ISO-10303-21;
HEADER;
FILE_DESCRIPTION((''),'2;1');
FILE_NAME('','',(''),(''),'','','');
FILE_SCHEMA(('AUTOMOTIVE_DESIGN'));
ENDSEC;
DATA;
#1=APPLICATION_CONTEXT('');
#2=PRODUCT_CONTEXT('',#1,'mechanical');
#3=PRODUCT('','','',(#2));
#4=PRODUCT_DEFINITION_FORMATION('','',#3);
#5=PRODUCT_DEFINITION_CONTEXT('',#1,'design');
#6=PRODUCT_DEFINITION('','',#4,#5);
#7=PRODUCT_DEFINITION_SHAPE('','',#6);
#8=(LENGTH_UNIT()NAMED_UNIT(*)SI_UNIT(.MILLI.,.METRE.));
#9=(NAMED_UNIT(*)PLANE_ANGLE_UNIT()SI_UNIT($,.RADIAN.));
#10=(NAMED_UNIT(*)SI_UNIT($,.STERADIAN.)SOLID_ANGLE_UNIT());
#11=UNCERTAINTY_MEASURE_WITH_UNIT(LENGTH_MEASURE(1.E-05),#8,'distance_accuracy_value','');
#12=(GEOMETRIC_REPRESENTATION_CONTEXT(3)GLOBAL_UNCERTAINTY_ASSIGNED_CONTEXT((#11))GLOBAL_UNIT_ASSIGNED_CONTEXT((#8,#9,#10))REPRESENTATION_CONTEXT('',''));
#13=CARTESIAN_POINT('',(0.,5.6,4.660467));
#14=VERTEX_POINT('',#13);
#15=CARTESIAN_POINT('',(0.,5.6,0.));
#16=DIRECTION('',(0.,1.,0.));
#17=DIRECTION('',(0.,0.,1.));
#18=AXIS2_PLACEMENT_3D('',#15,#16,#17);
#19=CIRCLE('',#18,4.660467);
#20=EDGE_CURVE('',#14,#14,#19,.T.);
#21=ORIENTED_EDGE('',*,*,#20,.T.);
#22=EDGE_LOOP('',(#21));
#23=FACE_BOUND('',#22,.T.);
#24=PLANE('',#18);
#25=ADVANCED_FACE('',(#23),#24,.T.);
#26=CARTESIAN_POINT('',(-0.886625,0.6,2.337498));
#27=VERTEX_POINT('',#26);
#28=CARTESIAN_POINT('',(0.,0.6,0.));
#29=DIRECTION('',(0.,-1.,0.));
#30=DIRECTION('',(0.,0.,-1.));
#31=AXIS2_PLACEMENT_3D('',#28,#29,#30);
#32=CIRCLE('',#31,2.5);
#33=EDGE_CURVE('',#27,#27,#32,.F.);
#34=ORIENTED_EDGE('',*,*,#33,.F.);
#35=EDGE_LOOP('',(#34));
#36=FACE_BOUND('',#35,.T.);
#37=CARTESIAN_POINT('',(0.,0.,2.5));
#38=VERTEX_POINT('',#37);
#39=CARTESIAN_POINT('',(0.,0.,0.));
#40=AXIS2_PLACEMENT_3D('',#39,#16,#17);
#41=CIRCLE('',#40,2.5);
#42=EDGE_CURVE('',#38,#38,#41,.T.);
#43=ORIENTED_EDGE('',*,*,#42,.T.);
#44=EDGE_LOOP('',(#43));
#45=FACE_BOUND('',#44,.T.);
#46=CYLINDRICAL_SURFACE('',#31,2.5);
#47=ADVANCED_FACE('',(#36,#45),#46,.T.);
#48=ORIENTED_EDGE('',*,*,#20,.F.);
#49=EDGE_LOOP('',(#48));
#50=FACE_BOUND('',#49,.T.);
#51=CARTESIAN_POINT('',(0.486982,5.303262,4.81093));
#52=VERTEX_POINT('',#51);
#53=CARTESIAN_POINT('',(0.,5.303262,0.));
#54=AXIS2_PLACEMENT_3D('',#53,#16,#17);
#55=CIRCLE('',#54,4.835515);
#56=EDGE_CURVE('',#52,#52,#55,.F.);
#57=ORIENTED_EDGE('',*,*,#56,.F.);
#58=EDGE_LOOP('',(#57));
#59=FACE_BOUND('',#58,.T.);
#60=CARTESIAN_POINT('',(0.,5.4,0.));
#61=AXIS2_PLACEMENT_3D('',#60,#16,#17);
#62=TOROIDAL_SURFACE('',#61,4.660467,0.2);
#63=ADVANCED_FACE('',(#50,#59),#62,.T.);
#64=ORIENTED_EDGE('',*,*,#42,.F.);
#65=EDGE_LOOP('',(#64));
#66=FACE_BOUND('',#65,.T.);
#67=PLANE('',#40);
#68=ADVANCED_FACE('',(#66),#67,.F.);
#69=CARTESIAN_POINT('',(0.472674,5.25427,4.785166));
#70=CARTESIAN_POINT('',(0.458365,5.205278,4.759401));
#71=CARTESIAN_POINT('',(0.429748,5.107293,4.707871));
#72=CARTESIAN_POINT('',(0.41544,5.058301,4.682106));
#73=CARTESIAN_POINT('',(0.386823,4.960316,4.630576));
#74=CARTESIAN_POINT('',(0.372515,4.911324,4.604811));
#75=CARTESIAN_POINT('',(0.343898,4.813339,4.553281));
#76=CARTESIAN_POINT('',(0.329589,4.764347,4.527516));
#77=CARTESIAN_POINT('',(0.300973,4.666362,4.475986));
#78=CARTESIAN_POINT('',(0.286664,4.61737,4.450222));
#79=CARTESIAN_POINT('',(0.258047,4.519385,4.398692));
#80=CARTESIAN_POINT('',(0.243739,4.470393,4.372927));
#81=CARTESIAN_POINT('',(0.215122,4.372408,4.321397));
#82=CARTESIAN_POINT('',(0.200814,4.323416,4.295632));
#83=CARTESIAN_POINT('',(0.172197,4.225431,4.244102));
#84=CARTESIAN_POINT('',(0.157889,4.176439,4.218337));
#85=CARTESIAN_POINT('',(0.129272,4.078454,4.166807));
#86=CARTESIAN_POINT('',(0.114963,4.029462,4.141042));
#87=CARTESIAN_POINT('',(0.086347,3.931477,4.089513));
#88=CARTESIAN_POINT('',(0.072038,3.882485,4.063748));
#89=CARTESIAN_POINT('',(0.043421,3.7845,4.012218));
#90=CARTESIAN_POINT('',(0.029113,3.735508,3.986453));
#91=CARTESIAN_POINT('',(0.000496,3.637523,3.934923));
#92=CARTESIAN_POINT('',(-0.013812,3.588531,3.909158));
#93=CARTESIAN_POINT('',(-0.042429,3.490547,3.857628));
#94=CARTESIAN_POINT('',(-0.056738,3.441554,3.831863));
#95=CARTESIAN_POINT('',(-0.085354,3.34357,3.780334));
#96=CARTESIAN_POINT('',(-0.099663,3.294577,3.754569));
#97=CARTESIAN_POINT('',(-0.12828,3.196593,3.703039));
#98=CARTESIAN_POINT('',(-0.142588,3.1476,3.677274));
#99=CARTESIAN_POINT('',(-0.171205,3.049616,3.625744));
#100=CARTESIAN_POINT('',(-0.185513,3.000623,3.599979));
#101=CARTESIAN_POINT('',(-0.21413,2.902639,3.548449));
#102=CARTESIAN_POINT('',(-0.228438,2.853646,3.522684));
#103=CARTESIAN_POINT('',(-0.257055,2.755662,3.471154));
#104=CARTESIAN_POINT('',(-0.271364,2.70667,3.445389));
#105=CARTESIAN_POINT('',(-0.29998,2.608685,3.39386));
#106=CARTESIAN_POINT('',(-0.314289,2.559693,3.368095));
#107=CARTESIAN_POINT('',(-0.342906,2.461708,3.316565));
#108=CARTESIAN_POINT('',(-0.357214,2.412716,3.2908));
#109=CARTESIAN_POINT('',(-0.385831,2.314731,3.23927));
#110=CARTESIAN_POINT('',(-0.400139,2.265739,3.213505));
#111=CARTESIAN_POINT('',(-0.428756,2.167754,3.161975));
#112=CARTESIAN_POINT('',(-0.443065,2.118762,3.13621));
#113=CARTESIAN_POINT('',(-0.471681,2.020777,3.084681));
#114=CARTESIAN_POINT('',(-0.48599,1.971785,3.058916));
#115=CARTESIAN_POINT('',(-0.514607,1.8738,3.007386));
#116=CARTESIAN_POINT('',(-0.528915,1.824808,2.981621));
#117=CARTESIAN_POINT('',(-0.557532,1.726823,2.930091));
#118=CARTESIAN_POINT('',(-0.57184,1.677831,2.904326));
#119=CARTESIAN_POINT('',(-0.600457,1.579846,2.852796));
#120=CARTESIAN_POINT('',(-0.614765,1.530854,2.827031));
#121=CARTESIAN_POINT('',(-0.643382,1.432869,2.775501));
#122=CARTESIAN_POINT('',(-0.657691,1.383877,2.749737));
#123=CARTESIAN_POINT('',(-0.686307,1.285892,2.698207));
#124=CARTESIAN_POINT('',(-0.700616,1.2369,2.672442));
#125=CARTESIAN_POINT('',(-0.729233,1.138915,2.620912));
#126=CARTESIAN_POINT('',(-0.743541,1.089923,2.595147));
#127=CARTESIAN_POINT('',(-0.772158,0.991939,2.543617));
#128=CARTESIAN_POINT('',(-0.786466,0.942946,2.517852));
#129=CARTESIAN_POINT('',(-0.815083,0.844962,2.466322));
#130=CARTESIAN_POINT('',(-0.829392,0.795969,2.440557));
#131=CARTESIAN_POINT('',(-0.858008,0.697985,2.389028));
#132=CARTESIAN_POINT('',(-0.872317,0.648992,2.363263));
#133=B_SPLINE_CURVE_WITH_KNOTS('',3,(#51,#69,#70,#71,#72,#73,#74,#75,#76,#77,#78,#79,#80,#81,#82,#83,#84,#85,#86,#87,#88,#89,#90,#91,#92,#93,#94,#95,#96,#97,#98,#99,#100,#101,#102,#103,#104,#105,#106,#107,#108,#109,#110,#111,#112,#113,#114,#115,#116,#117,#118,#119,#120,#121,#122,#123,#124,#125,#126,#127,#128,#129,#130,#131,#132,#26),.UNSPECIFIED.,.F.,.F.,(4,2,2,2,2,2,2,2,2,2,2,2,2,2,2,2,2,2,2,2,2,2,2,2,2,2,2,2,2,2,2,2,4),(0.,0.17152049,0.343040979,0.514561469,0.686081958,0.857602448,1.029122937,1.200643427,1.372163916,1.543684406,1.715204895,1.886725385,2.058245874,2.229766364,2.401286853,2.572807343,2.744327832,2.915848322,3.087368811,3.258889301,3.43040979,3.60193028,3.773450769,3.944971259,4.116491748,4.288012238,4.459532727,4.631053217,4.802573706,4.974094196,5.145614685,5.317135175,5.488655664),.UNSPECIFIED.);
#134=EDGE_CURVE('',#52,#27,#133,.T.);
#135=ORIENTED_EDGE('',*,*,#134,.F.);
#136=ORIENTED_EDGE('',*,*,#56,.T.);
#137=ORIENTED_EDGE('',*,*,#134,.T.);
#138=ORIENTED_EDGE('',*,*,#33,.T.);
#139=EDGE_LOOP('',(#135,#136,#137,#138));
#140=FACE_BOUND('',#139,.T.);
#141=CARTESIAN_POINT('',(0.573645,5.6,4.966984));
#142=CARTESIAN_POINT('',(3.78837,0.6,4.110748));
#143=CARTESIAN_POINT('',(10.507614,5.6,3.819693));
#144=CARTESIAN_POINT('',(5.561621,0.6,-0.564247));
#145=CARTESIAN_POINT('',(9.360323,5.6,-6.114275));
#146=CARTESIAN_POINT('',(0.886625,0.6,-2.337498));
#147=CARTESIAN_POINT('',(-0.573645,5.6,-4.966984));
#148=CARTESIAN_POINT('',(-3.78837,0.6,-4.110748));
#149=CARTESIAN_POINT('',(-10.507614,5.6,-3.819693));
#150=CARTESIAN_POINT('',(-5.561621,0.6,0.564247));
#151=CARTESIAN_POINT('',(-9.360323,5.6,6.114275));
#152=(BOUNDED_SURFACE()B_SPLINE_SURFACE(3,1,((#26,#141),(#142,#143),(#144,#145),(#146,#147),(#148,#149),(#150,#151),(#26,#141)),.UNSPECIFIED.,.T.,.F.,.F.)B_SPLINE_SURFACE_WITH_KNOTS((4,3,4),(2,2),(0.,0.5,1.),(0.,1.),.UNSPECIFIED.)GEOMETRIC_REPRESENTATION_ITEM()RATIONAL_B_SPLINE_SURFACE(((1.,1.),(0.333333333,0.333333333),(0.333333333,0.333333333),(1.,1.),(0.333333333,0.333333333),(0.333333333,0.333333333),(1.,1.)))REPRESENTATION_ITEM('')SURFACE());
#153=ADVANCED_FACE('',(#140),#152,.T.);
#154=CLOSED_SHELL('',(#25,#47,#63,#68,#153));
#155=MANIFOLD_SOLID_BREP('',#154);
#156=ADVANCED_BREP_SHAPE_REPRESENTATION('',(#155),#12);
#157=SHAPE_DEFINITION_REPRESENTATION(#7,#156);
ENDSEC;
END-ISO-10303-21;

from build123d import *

# Parameters (mm, degrees)
SKETCH1_R           = 2.5
BOSS_EXTRUDE1_DEPTH = 0.6
FILLET1_R           = 0.2


with BuildPart() as part:
    # Sketch1 → Boss-Extrude1 (new body)
    with BuildSketch(Plane(origin=(0, 0, 0), x_dir=(1, 0, 0), z_dir=(0, 1, 0))):
        with Locations(Location((0, 0, 0), (0, 0, 270))):
            Circle(SKETCH1_R)
    extrude(amount=BOSS_EXTRUDE1_DEPTH)

    # Loft1: read off the stored shape, not the designer's step
    # Loft1: loft between two sections, ruled curve by curve
    loft1_from = [
        Edge.make_bspline([(-0.886625195, 0.6, 2.337497757), (3.788370319, 0.6, 4.110748147), (5.561620709, 0.6, -0.564247367), (0.886625195, 0.6, -2.337497757), (-3.788370319, 0.6, -4.110748147), (-5.561620709, 0.6, 0.564247367), (-0.886625195, 0.6, 2.337497757)], [0, 0, 0, 0, 0.5, 0.5, 0.5, 1, 1, 1, 1], 3, [1, 0.333333333, 0.333333333, 1, 0.333333333, 0.333333333, 1]),
    ]
    loft1_to = [
        Edge.make_bspline([(0.573645482, 5.6, 4.966984081), (10.507613644, 5.6, 3.819693116), (9.36032268, 5.6, -6.114275046), (-0.573645482, 5.6, -4.966984081), (-10.507613644, 5.6, -3.819693116), (-9.36032268, 5.6, 6.114275046), (0.573645482, 5.6, 4.966984081)], [0, 0, 0, 0, 0.5, 0.5, 0.5, 1, 1, 1, 1], 3, [1, 0.333333333, 0.333333333, 1, 0.333333333, 0.333333333, 1]),
    ]
    loft1 = Solid(Shell([*[Face.make_surface_from_curves(loft1_from[k], loft1_to[k]) for k in range(1)], Face(Wire(loft1_from)), Face(Wire(loft1_to))]))
    add(loft1)

    # Fillet1
    fillet1_edges = [part.edges().sort_by_distance(p)[0] for p in [
        (-0.573645482, 5.6, -4.966984081),
    ]]
    fillet(fillet1_edges, radius=FILLET1_R)


solid = part.part
